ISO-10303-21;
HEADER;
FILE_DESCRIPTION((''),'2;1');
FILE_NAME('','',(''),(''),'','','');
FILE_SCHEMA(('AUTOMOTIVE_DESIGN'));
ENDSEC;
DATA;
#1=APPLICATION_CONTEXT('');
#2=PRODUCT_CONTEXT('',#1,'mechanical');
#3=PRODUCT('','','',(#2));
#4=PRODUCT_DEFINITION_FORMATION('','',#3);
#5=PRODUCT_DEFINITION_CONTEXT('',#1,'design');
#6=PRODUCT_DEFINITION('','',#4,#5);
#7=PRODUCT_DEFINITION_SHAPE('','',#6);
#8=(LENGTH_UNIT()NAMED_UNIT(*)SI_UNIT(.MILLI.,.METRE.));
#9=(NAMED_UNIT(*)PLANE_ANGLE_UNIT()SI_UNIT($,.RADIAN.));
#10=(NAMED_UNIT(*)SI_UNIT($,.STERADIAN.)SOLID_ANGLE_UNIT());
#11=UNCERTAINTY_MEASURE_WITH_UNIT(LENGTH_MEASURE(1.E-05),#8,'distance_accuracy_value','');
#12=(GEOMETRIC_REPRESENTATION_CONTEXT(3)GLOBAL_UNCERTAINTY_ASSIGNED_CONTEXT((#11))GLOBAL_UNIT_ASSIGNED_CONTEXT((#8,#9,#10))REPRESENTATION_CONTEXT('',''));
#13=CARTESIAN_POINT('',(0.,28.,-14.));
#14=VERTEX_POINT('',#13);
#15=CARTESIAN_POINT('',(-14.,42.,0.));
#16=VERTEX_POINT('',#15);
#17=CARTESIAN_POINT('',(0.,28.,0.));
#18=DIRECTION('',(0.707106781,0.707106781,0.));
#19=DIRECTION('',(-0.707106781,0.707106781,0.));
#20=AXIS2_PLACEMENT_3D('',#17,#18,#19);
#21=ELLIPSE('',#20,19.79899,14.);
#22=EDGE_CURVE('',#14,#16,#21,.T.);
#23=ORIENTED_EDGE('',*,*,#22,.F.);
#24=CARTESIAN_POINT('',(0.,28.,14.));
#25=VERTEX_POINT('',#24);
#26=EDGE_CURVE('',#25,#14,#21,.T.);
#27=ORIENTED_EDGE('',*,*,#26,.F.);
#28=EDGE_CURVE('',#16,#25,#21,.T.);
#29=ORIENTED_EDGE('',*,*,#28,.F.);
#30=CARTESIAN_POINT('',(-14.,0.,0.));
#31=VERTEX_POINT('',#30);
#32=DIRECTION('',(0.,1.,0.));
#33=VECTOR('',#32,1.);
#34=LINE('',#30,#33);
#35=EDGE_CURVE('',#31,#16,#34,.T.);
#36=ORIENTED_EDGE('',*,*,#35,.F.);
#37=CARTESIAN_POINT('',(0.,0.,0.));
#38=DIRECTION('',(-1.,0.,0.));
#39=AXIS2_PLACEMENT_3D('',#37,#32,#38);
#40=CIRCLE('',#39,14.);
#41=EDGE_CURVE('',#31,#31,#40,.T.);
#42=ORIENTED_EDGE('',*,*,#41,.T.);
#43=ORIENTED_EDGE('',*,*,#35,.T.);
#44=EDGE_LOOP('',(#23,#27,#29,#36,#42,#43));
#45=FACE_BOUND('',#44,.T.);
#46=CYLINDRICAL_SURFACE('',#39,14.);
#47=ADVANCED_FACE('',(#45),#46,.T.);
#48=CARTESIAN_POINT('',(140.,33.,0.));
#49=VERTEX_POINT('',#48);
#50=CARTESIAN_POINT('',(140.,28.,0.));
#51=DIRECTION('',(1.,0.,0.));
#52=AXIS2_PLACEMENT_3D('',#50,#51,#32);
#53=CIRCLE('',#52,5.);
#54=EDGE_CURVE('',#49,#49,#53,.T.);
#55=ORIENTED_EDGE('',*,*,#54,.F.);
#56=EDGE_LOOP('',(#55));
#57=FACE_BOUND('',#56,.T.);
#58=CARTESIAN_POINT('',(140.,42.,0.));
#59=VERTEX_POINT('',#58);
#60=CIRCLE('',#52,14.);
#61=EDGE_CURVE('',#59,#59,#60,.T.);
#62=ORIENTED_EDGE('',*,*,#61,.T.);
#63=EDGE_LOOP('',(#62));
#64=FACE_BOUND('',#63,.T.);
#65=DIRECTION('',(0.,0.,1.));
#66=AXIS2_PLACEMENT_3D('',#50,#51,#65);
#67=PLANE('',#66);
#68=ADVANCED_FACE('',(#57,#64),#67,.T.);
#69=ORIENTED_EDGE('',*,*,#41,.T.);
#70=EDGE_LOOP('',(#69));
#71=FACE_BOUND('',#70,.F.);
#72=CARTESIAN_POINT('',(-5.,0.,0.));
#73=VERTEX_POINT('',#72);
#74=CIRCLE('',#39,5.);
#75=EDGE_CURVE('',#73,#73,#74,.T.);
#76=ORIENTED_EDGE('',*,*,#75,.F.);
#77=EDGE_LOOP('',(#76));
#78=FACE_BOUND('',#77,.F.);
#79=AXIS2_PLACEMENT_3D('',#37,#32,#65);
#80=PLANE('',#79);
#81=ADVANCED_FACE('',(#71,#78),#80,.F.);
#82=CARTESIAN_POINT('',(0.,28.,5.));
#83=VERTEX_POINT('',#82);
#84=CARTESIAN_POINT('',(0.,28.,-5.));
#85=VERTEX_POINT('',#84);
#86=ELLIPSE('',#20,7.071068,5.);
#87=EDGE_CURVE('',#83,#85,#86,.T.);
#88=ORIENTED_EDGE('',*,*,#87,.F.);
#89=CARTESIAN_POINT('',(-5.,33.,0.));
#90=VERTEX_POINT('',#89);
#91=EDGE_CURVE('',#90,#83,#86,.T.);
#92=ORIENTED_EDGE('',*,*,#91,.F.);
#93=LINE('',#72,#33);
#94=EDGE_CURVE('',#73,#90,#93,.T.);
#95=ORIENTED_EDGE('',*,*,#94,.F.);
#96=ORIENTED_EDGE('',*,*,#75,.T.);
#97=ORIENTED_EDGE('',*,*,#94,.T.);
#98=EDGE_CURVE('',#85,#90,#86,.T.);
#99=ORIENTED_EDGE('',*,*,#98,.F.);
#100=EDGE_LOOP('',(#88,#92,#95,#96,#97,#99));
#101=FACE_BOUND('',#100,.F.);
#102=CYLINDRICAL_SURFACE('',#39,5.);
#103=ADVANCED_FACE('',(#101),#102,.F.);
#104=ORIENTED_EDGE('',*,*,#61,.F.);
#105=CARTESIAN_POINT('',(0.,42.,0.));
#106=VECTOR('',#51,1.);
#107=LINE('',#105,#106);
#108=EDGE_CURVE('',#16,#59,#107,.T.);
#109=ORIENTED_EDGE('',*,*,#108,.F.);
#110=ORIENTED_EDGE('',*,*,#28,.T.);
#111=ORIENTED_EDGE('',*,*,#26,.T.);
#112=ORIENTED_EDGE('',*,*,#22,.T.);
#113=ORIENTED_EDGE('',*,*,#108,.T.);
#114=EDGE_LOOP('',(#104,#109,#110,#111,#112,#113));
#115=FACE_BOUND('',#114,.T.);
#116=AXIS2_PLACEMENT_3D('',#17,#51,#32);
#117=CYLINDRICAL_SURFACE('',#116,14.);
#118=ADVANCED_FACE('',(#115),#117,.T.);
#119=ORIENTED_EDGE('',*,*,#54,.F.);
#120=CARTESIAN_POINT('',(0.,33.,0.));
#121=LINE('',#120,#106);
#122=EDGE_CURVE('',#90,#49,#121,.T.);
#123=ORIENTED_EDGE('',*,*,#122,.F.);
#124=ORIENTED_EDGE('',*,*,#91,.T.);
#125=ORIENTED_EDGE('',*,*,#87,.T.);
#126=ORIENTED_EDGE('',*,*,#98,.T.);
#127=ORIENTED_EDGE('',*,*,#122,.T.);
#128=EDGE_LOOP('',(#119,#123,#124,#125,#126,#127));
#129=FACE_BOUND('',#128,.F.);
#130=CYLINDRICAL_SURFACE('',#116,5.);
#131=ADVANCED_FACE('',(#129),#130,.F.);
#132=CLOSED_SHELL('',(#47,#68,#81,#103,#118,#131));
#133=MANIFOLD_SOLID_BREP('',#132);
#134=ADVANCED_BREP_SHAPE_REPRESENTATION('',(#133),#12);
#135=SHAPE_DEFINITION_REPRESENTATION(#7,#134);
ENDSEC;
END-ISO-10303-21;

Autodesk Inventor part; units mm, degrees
ref_plane "YZ Plane" through (0, 0, 0) normal (1, 0, 0) x (0, 1, 0)
ref_plane "XZ Plane" through (0, 0, 0) normal (0, 1, 0) x (-1, 0, 0)
sketch "Skizze1" plane through (0, 0, 0) normal (0, 1, 0) x (-1, 0, 0)
  circle A0 centre (0, 0) radius 14
  circle A1 centre (0, 0) radius 5
  dimension "d0" = 28
  dimension "d3" = 10
sketch "Skizze2" plane through (0, 0, 0) normal (0, 0, 1) x (1, 0, 0)
  line L0 (0, 0) -> (0, 28)
  line L1 (0, 28) -> (140, 28)
  dimension "d1" = 28
  dimension "d2" = 140
sweep "Sweeping1" add profiles "Skizze1" path "Skizze2"
properties part number "foam tube"
